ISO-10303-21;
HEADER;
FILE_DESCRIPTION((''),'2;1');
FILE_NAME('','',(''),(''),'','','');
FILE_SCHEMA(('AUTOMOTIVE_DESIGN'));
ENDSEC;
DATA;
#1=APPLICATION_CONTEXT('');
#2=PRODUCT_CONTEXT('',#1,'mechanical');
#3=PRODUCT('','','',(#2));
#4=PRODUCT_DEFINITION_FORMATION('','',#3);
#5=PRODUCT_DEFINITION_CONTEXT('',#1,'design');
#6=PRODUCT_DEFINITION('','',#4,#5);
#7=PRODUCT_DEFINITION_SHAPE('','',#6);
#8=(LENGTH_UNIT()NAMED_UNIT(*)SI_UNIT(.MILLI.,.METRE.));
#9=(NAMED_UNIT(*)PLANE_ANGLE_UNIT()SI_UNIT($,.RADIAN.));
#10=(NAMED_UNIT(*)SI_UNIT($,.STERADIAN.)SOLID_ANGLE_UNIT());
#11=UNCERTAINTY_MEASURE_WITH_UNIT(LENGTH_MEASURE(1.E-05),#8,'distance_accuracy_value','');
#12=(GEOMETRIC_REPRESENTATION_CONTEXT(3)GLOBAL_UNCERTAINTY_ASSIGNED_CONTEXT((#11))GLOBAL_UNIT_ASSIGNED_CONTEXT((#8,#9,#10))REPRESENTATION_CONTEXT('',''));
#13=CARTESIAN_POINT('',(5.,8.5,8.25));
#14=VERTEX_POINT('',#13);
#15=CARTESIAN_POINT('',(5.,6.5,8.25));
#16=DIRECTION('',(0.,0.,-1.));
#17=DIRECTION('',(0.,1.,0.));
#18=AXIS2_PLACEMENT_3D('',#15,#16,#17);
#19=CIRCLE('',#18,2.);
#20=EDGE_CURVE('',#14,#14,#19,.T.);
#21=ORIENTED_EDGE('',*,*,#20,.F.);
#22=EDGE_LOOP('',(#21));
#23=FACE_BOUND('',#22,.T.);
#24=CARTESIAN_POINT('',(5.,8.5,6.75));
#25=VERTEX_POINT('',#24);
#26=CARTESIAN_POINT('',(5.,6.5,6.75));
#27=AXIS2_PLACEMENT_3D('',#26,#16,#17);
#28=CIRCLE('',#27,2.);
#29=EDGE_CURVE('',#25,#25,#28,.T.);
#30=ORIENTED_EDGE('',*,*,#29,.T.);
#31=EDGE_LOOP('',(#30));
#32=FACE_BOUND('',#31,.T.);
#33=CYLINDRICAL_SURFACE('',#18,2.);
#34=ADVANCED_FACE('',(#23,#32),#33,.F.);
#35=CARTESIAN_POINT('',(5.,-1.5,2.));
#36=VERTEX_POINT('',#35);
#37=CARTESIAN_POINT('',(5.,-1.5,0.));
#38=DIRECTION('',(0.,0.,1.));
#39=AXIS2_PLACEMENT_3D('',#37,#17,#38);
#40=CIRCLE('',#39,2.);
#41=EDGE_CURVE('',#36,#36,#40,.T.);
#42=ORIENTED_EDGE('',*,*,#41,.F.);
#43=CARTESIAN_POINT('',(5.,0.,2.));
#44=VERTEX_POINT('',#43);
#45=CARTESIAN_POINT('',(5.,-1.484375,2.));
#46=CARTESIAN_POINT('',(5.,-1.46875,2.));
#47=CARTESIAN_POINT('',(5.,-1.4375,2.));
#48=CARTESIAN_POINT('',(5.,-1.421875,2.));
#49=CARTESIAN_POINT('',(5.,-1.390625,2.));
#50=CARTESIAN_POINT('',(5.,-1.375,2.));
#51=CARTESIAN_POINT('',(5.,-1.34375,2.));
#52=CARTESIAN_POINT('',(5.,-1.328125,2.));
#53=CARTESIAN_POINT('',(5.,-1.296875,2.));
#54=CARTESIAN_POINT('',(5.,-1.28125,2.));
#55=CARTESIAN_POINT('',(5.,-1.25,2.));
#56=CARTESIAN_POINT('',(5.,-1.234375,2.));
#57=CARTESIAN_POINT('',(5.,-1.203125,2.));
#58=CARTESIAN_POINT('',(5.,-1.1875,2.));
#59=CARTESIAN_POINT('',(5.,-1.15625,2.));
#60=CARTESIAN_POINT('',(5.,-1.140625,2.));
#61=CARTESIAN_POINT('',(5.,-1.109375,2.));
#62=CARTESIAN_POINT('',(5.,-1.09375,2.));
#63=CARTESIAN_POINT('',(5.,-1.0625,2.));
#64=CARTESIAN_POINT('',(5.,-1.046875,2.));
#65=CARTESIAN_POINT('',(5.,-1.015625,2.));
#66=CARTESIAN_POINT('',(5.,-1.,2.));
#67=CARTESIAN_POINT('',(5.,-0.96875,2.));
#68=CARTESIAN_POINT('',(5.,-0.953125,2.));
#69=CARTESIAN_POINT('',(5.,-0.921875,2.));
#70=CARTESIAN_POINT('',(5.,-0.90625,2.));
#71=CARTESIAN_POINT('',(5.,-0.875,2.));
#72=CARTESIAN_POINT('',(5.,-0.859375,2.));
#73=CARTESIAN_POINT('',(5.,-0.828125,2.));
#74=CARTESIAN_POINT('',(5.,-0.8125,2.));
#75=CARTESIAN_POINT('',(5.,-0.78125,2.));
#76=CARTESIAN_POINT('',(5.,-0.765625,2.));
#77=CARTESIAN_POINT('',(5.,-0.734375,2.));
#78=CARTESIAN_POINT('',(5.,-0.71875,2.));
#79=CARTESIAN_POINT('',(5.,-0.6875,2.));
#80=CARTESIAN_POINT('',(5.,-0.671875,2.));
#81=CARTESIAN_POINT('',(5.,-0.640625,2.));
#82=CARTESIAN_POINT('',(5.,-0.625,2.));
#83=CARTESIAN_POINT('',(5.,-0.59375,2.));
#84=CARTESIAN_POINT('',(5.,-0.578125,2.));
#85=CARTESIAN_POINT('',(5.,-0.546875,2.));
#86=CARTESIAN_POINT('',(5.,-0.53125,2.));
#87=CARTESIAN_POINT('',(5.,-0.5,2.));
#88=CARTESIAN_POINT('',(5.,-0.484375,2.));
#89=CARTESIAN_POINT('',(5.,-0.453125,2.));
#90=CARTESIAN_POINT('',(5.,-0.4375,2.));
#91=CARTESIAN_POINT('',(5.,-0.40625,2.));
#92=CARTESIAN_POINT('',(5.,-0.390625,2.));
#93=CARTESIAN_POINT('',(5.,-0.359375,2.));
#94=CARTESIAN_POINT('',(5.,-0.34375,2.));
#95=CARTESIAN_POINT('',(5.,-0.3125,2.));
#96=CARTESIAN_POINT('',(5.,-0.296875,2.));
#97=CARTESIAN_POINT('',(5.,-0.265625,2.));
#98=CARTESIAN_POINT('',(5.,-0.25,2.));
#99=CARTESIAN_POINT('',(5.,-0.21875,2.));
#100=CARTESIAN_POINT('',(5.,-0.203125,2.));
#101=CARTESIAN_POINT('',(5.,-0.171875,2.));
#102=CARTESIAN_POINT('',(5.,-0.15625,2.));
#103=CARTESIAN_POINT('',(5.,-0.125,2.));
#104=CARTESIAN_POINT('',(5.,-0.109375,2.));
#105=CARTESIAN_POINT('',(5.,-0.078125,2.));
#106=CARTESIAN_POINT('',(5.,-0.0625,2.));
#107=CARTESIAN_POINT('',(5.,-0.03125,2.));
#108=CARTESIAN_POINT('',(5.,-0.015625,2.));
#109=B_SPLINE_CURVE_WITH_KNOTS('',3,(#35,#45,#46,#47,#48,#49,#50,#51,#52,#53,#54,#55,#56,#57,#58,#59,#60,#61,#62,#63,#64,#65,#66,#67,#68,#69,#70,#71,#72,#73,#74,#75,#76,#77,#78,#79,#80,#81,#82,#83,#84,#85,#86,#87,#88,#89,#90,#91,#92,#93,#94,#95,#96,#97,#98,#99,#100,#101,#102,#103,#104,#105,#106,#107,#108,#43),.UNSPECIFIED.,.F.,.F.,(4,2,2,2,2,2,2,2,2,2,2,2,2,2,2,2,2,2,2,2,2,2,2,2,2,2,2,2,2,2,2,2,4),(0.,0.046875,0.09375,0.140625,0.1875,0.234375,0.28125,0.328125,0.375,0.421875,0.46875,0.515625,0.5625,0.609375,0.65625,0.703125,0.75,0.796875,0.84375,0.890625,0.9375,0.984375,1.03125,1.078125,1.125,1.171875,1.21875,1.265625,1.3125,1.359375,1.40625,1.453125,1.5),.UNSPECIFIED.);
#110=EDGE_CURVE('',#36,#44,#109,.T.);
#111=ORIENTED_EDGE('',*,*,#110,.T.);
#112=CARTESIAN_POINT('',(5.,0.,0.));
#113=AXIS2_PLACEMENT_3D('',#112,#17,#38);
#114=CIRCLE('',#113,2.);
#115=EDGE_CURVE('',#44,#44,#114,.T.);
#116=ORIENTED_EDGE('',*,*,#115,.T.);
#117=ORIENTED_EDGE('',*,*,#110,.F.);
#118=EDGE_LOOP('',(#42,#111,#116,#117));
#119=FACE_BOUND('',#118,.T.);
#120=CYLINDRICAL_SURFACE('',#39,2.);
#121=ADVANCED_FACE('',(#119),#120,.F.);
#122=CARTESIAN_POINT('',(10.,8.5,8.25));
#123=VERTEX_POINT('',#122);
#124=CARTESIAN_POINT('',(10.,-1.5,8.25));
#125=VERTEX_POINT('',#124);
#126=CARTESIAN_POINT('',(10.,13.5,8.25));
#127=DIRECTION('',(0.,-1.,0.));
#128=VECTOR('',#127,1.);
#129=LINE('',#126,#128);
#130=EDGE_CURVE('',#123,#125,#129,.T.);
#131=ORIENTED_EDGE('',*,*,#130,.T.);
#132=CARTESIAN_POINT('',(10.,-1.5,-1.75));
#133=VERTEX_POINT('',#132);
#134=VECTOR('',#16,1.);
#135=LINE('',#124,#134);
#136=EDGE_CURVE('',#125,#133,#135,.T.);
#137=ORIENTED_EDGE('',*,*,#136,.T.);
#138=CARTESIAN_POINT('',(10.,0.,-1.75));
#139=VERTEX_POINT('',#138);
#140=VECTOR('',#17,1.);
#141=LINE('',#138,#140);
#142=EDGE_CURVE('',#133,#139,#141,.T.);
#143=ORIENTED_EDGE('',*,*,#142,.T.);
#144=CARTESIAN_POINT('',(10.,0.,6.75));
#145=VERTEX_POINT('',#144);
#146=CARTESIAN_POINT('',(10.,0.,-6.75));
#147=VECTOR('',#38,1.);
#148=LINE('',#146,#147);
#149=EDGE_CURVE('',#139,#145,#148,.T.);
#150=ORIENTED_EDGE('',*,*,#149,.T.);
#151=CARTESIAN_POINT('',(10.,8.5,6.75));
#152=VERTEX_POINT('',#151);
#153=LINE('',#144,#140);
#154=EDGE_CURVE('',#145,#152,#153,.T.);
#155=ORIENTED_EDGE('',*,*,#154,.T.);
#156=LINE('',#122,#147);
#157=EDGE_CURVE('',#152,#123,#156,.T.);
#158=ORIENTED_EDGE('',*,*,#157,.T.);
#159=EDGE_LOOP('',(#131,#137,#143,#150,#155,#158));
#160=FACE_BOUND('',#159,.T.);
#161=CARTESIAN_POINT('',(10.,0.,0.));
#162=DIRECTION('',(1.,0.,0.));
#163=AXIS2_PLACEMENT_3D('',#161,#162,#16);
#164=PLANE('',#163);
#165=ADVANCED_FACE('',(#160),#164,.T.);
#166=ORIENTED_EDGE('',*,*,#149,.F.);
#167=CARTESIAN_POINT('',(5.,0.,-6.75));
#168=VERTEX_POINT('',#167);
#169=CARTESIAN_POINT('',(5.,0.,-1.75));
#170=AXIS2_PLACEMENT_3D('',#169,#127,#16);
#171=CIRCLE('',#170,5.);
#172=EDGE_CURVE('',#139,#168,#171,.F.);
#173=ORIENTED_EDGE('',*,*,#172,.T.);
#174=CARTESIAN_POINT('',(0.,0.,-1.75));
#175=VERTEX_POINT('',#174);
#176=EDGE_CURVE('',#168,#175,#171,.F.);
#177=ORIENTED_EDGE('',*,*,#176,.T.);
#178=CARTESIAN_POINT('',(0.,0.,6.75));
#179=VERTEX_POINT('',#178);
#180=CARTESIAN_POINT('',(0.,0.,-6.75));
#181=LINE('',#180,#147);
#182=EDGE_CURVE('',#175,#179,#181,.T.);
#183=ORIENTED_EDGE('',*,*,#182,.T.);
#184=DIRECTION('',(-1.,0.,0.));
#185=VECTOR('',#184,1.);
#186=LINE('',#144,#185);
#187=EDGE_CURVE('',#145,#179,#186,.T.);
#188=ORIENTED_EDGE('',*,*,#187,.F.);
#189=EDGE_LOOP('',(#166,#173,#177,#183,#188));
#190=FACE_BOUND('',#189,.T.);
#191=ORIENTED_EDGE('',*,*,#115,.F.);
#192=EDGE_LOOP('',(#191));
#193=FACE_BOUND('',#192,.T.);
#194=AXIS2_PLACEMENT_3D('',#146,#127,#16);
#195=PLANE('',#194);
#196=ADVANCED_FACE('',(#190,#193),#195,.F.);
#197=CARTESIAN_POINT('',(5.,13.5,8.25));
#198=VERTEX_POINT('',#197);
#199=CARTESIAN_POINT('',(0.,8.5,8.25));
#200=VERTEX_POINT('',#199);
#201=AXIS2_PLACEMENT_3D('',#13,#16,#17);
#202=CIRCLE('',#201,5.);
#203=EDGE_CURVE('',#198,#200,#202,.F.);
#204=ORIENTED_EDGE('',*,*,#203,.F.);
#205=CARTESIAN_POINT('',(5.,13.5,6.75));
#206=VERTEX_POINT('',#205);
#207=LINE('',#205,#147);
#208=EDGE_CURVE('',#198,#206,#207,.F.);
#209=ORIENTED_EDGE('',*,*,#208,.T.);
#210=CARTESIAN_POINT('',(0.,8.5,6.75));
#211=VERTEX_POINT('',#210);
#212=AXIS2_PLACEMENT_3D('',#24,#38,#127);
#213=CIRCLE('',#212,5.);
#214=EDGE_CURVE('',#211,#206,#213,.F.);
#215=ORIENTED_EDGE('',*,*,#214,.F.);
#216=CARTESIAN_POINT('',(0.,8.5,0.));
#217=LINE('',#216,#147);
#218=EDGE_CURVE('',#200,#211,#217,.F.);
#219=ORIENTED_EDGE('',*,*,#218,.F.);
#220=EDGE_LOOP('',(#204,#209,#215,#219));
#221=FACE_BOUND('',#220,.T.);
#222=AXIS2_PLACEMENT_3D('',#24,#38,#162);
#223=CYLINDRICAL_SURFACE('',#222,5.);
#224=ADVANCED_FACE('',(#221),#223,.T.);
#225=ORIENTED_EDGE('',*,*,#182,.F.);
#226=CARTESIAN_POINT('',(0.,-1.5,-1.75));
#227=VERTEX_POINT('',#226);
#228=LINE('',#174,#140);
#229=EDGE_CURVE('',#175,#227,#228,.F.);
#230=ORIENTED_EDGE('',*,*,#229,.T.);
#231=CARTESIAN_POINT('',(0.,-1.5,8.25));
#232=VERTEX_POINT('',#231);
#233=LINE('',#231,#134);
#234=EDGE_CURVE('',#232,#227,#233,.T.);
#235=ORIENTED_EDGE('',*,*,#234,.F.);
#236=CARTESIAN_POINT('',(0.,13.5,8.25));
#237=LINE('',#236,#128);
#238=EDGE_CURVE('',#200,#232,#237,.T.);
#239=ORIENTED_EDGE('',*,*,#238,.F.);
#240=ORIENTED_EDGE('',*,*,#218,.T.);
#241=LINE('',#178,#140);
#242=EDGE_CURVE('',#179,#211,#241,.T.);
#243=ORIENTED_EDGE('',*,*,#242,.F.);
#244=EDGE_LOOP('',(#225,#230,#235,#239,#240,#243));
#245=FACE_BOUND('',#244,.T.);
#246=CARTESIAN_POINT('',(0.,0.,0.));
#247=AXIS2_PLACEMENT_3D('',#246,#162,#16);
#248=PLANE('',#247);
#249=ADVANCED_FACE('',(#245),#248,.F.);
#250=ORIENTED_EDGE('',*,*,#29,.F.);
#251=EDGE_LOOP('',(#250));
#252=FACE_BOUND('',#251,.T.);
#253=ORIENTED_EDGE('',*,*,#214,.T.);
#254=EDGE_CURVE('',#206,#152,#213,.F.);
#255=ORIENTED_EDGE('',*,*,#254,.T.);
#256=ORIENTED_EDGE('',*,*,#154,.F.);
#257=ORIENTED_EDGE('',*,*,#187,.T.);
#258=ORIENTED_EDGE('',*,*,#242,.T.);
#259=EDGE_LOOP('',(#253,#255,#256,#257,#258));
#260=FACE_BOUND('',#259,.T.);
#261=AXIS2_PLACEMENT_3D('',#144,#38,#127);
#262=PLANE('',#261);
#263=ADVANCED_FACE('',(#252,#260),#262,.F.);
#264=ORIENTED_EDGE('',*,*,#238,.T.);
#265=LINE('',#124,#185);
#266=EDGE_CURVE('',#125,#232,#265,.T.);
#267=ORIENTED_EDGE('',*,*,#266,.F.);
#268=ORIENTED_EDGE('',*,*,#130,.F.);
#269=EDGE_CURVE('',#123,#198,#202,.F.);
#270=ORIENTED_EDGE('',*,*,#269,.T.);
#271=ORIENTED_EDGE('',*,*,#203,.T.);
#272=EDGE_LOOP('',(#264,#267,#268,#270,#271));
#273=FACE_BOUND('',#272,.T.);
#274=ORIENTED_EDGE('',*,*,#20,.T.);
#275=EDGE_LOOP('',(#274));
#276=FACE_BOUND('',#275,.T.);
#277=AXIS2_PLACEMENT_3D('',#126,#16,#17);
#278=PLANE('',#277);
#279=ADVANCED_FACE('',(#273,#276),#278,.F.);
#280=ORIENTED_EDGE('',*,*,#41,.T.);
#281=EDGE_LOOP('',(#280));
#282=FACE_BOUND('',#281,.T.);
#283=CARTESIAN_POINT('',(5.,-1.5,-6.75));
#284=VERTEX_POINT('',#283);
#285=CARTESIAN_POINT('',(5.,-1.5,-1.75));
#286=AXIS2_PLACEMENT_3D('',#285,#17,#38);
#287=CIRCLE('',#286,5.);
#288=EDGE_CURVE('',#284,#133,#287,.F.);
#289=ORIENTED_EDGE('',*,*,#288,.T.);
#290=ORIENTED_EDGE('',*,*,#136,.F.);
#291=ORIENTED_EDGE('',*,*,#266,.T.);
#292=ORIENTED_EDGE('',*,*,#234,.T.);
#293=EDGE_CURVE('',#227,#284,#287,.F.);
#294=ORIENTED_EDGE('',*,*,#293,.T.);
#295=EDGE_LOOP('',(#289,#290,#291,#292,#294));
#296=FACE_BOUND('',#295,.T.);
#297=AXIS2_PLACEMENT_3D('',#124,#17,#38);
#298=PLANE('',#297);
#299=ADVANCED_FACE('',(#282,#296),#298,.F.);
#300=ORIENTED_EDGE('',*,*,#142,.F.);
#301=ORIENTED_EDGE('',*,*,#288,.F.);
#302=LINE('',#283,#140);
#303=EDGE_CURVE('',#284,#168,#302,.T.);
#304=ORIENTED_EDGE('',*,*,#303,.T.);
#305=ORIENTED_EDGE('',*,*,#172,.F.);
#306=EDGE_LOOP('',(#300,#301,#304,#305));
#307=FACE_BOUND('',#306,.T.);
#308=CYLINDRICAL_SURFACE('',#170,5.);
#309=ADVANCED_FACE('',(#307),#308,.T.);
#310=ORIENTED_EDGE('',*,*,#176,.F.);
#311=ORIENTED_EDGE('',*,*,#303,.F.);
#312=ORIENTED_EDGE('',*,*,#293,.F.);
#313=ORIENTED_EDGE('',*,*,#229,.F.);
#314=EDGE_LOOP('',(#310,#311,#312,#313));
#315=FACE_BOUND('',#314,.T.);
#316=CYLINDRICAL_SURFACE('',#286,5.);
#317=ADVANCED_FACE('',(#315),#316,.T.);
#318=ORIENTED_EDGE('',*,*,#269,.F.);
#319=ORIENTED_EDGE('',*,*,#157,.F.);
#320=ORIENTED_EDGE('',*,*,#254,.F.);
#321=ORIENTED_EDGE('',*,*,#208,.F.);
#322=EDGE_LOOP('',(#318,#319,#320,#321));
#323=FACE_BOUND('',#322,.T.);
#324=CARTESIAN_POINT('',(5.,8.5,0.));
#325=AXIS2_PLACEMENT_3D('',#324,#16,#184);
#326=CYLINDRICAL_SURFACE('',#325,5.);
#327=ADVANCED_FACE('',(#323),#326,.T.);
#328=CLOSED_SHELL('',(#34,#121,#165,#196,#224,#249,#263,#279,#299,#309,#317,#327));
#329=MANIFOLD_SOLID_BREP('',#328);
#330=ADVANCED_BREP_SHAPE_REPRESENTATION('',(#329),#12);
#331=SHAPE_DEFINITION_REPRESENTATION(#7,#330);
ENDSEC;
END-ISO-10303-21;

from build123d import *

# Parameters (mm, degrees)
BOSS_EXTRU_1_DEPTH      = 10
ESQUISSE2_R             = 2
ENL_V_MAT_EXTRU_1_DEPTH = 22.552262062
CONG_1_R                = 5
ESQUISSE3_R             = 2
ENL_V_MAT_EXTRU_2_DEPTH = 19.716636984
CONG_2_R                = 5


with BuildPart() as part:
    # Esquisse1 → Boss.-Extru.1 (new body)
    with BuildSketch(Plane(origin=(0, 0, 0), x_dir=(0, 0, -1), z_dir=(1, 0, 0))):
        Polygon((6.75, 0), (-6.75, 0), (-6.75, 13.5), (-8.25, 13.5), (-8.25, -1.5), (6.75, -1.5), align=None)
    extrude(amount=BOSS_EXTRU_1_DEPTH)

    # Esquisse2 → Enlèv. mat.-Extru.1 (cut, through all)
    with BuildSketch(Plane(origin=(0, 0, 6.75), x_dir=(-1, 0, 0), z_dir=(0, 0, -1))):
        with Locations(Location((-5, 6.5, 0), (0, 0, 90))):
            Circle(ESQUISSE2_R)
    extrude(amount=-ENL_V_MAT_EXTRU_1_DEPTH, mode=Mode.SUBTRACT)

    # Congé1
    cong_1_edges = [part.edges().sort_by_distance(p)[0] for p in [
        (0, 13.5, 7.5),
        (10, 13.5, 7.5),
    ]]
    fillet(cong_1_edges, radius=CONG_1_R - 0.0001)  # a hair under: the kernel refuses the full size

    # Esquisse3 → Enlèv. mat.-Extru.2 (cut, through all)
    with BuildSketch(Plane(origin=(0, 0, 0), x_dir=(1, 0, 0), z_dir=(0, 1, 0))):
        with Locations(Location((5, 0, 0), (0, 0, 270))):
            Circle(ESQUISSE3_R)
    extrude(amount=-ENL_V_MAT_EXTRU_2_DEPTH, mode=Mode.SUBTRACT)

    # Congé2
    cong_2_edges = [part.edges().sort_by_distance(p)[0] for p in [
        (10, -0.75, -6.75),
        (0, -0.75, -6.75),
    ]]
    fillet(cong_2_edges, radius=CONG_2_R - 0.0001)  # a hair under: the kernel refuses the full size


solid = part.part
